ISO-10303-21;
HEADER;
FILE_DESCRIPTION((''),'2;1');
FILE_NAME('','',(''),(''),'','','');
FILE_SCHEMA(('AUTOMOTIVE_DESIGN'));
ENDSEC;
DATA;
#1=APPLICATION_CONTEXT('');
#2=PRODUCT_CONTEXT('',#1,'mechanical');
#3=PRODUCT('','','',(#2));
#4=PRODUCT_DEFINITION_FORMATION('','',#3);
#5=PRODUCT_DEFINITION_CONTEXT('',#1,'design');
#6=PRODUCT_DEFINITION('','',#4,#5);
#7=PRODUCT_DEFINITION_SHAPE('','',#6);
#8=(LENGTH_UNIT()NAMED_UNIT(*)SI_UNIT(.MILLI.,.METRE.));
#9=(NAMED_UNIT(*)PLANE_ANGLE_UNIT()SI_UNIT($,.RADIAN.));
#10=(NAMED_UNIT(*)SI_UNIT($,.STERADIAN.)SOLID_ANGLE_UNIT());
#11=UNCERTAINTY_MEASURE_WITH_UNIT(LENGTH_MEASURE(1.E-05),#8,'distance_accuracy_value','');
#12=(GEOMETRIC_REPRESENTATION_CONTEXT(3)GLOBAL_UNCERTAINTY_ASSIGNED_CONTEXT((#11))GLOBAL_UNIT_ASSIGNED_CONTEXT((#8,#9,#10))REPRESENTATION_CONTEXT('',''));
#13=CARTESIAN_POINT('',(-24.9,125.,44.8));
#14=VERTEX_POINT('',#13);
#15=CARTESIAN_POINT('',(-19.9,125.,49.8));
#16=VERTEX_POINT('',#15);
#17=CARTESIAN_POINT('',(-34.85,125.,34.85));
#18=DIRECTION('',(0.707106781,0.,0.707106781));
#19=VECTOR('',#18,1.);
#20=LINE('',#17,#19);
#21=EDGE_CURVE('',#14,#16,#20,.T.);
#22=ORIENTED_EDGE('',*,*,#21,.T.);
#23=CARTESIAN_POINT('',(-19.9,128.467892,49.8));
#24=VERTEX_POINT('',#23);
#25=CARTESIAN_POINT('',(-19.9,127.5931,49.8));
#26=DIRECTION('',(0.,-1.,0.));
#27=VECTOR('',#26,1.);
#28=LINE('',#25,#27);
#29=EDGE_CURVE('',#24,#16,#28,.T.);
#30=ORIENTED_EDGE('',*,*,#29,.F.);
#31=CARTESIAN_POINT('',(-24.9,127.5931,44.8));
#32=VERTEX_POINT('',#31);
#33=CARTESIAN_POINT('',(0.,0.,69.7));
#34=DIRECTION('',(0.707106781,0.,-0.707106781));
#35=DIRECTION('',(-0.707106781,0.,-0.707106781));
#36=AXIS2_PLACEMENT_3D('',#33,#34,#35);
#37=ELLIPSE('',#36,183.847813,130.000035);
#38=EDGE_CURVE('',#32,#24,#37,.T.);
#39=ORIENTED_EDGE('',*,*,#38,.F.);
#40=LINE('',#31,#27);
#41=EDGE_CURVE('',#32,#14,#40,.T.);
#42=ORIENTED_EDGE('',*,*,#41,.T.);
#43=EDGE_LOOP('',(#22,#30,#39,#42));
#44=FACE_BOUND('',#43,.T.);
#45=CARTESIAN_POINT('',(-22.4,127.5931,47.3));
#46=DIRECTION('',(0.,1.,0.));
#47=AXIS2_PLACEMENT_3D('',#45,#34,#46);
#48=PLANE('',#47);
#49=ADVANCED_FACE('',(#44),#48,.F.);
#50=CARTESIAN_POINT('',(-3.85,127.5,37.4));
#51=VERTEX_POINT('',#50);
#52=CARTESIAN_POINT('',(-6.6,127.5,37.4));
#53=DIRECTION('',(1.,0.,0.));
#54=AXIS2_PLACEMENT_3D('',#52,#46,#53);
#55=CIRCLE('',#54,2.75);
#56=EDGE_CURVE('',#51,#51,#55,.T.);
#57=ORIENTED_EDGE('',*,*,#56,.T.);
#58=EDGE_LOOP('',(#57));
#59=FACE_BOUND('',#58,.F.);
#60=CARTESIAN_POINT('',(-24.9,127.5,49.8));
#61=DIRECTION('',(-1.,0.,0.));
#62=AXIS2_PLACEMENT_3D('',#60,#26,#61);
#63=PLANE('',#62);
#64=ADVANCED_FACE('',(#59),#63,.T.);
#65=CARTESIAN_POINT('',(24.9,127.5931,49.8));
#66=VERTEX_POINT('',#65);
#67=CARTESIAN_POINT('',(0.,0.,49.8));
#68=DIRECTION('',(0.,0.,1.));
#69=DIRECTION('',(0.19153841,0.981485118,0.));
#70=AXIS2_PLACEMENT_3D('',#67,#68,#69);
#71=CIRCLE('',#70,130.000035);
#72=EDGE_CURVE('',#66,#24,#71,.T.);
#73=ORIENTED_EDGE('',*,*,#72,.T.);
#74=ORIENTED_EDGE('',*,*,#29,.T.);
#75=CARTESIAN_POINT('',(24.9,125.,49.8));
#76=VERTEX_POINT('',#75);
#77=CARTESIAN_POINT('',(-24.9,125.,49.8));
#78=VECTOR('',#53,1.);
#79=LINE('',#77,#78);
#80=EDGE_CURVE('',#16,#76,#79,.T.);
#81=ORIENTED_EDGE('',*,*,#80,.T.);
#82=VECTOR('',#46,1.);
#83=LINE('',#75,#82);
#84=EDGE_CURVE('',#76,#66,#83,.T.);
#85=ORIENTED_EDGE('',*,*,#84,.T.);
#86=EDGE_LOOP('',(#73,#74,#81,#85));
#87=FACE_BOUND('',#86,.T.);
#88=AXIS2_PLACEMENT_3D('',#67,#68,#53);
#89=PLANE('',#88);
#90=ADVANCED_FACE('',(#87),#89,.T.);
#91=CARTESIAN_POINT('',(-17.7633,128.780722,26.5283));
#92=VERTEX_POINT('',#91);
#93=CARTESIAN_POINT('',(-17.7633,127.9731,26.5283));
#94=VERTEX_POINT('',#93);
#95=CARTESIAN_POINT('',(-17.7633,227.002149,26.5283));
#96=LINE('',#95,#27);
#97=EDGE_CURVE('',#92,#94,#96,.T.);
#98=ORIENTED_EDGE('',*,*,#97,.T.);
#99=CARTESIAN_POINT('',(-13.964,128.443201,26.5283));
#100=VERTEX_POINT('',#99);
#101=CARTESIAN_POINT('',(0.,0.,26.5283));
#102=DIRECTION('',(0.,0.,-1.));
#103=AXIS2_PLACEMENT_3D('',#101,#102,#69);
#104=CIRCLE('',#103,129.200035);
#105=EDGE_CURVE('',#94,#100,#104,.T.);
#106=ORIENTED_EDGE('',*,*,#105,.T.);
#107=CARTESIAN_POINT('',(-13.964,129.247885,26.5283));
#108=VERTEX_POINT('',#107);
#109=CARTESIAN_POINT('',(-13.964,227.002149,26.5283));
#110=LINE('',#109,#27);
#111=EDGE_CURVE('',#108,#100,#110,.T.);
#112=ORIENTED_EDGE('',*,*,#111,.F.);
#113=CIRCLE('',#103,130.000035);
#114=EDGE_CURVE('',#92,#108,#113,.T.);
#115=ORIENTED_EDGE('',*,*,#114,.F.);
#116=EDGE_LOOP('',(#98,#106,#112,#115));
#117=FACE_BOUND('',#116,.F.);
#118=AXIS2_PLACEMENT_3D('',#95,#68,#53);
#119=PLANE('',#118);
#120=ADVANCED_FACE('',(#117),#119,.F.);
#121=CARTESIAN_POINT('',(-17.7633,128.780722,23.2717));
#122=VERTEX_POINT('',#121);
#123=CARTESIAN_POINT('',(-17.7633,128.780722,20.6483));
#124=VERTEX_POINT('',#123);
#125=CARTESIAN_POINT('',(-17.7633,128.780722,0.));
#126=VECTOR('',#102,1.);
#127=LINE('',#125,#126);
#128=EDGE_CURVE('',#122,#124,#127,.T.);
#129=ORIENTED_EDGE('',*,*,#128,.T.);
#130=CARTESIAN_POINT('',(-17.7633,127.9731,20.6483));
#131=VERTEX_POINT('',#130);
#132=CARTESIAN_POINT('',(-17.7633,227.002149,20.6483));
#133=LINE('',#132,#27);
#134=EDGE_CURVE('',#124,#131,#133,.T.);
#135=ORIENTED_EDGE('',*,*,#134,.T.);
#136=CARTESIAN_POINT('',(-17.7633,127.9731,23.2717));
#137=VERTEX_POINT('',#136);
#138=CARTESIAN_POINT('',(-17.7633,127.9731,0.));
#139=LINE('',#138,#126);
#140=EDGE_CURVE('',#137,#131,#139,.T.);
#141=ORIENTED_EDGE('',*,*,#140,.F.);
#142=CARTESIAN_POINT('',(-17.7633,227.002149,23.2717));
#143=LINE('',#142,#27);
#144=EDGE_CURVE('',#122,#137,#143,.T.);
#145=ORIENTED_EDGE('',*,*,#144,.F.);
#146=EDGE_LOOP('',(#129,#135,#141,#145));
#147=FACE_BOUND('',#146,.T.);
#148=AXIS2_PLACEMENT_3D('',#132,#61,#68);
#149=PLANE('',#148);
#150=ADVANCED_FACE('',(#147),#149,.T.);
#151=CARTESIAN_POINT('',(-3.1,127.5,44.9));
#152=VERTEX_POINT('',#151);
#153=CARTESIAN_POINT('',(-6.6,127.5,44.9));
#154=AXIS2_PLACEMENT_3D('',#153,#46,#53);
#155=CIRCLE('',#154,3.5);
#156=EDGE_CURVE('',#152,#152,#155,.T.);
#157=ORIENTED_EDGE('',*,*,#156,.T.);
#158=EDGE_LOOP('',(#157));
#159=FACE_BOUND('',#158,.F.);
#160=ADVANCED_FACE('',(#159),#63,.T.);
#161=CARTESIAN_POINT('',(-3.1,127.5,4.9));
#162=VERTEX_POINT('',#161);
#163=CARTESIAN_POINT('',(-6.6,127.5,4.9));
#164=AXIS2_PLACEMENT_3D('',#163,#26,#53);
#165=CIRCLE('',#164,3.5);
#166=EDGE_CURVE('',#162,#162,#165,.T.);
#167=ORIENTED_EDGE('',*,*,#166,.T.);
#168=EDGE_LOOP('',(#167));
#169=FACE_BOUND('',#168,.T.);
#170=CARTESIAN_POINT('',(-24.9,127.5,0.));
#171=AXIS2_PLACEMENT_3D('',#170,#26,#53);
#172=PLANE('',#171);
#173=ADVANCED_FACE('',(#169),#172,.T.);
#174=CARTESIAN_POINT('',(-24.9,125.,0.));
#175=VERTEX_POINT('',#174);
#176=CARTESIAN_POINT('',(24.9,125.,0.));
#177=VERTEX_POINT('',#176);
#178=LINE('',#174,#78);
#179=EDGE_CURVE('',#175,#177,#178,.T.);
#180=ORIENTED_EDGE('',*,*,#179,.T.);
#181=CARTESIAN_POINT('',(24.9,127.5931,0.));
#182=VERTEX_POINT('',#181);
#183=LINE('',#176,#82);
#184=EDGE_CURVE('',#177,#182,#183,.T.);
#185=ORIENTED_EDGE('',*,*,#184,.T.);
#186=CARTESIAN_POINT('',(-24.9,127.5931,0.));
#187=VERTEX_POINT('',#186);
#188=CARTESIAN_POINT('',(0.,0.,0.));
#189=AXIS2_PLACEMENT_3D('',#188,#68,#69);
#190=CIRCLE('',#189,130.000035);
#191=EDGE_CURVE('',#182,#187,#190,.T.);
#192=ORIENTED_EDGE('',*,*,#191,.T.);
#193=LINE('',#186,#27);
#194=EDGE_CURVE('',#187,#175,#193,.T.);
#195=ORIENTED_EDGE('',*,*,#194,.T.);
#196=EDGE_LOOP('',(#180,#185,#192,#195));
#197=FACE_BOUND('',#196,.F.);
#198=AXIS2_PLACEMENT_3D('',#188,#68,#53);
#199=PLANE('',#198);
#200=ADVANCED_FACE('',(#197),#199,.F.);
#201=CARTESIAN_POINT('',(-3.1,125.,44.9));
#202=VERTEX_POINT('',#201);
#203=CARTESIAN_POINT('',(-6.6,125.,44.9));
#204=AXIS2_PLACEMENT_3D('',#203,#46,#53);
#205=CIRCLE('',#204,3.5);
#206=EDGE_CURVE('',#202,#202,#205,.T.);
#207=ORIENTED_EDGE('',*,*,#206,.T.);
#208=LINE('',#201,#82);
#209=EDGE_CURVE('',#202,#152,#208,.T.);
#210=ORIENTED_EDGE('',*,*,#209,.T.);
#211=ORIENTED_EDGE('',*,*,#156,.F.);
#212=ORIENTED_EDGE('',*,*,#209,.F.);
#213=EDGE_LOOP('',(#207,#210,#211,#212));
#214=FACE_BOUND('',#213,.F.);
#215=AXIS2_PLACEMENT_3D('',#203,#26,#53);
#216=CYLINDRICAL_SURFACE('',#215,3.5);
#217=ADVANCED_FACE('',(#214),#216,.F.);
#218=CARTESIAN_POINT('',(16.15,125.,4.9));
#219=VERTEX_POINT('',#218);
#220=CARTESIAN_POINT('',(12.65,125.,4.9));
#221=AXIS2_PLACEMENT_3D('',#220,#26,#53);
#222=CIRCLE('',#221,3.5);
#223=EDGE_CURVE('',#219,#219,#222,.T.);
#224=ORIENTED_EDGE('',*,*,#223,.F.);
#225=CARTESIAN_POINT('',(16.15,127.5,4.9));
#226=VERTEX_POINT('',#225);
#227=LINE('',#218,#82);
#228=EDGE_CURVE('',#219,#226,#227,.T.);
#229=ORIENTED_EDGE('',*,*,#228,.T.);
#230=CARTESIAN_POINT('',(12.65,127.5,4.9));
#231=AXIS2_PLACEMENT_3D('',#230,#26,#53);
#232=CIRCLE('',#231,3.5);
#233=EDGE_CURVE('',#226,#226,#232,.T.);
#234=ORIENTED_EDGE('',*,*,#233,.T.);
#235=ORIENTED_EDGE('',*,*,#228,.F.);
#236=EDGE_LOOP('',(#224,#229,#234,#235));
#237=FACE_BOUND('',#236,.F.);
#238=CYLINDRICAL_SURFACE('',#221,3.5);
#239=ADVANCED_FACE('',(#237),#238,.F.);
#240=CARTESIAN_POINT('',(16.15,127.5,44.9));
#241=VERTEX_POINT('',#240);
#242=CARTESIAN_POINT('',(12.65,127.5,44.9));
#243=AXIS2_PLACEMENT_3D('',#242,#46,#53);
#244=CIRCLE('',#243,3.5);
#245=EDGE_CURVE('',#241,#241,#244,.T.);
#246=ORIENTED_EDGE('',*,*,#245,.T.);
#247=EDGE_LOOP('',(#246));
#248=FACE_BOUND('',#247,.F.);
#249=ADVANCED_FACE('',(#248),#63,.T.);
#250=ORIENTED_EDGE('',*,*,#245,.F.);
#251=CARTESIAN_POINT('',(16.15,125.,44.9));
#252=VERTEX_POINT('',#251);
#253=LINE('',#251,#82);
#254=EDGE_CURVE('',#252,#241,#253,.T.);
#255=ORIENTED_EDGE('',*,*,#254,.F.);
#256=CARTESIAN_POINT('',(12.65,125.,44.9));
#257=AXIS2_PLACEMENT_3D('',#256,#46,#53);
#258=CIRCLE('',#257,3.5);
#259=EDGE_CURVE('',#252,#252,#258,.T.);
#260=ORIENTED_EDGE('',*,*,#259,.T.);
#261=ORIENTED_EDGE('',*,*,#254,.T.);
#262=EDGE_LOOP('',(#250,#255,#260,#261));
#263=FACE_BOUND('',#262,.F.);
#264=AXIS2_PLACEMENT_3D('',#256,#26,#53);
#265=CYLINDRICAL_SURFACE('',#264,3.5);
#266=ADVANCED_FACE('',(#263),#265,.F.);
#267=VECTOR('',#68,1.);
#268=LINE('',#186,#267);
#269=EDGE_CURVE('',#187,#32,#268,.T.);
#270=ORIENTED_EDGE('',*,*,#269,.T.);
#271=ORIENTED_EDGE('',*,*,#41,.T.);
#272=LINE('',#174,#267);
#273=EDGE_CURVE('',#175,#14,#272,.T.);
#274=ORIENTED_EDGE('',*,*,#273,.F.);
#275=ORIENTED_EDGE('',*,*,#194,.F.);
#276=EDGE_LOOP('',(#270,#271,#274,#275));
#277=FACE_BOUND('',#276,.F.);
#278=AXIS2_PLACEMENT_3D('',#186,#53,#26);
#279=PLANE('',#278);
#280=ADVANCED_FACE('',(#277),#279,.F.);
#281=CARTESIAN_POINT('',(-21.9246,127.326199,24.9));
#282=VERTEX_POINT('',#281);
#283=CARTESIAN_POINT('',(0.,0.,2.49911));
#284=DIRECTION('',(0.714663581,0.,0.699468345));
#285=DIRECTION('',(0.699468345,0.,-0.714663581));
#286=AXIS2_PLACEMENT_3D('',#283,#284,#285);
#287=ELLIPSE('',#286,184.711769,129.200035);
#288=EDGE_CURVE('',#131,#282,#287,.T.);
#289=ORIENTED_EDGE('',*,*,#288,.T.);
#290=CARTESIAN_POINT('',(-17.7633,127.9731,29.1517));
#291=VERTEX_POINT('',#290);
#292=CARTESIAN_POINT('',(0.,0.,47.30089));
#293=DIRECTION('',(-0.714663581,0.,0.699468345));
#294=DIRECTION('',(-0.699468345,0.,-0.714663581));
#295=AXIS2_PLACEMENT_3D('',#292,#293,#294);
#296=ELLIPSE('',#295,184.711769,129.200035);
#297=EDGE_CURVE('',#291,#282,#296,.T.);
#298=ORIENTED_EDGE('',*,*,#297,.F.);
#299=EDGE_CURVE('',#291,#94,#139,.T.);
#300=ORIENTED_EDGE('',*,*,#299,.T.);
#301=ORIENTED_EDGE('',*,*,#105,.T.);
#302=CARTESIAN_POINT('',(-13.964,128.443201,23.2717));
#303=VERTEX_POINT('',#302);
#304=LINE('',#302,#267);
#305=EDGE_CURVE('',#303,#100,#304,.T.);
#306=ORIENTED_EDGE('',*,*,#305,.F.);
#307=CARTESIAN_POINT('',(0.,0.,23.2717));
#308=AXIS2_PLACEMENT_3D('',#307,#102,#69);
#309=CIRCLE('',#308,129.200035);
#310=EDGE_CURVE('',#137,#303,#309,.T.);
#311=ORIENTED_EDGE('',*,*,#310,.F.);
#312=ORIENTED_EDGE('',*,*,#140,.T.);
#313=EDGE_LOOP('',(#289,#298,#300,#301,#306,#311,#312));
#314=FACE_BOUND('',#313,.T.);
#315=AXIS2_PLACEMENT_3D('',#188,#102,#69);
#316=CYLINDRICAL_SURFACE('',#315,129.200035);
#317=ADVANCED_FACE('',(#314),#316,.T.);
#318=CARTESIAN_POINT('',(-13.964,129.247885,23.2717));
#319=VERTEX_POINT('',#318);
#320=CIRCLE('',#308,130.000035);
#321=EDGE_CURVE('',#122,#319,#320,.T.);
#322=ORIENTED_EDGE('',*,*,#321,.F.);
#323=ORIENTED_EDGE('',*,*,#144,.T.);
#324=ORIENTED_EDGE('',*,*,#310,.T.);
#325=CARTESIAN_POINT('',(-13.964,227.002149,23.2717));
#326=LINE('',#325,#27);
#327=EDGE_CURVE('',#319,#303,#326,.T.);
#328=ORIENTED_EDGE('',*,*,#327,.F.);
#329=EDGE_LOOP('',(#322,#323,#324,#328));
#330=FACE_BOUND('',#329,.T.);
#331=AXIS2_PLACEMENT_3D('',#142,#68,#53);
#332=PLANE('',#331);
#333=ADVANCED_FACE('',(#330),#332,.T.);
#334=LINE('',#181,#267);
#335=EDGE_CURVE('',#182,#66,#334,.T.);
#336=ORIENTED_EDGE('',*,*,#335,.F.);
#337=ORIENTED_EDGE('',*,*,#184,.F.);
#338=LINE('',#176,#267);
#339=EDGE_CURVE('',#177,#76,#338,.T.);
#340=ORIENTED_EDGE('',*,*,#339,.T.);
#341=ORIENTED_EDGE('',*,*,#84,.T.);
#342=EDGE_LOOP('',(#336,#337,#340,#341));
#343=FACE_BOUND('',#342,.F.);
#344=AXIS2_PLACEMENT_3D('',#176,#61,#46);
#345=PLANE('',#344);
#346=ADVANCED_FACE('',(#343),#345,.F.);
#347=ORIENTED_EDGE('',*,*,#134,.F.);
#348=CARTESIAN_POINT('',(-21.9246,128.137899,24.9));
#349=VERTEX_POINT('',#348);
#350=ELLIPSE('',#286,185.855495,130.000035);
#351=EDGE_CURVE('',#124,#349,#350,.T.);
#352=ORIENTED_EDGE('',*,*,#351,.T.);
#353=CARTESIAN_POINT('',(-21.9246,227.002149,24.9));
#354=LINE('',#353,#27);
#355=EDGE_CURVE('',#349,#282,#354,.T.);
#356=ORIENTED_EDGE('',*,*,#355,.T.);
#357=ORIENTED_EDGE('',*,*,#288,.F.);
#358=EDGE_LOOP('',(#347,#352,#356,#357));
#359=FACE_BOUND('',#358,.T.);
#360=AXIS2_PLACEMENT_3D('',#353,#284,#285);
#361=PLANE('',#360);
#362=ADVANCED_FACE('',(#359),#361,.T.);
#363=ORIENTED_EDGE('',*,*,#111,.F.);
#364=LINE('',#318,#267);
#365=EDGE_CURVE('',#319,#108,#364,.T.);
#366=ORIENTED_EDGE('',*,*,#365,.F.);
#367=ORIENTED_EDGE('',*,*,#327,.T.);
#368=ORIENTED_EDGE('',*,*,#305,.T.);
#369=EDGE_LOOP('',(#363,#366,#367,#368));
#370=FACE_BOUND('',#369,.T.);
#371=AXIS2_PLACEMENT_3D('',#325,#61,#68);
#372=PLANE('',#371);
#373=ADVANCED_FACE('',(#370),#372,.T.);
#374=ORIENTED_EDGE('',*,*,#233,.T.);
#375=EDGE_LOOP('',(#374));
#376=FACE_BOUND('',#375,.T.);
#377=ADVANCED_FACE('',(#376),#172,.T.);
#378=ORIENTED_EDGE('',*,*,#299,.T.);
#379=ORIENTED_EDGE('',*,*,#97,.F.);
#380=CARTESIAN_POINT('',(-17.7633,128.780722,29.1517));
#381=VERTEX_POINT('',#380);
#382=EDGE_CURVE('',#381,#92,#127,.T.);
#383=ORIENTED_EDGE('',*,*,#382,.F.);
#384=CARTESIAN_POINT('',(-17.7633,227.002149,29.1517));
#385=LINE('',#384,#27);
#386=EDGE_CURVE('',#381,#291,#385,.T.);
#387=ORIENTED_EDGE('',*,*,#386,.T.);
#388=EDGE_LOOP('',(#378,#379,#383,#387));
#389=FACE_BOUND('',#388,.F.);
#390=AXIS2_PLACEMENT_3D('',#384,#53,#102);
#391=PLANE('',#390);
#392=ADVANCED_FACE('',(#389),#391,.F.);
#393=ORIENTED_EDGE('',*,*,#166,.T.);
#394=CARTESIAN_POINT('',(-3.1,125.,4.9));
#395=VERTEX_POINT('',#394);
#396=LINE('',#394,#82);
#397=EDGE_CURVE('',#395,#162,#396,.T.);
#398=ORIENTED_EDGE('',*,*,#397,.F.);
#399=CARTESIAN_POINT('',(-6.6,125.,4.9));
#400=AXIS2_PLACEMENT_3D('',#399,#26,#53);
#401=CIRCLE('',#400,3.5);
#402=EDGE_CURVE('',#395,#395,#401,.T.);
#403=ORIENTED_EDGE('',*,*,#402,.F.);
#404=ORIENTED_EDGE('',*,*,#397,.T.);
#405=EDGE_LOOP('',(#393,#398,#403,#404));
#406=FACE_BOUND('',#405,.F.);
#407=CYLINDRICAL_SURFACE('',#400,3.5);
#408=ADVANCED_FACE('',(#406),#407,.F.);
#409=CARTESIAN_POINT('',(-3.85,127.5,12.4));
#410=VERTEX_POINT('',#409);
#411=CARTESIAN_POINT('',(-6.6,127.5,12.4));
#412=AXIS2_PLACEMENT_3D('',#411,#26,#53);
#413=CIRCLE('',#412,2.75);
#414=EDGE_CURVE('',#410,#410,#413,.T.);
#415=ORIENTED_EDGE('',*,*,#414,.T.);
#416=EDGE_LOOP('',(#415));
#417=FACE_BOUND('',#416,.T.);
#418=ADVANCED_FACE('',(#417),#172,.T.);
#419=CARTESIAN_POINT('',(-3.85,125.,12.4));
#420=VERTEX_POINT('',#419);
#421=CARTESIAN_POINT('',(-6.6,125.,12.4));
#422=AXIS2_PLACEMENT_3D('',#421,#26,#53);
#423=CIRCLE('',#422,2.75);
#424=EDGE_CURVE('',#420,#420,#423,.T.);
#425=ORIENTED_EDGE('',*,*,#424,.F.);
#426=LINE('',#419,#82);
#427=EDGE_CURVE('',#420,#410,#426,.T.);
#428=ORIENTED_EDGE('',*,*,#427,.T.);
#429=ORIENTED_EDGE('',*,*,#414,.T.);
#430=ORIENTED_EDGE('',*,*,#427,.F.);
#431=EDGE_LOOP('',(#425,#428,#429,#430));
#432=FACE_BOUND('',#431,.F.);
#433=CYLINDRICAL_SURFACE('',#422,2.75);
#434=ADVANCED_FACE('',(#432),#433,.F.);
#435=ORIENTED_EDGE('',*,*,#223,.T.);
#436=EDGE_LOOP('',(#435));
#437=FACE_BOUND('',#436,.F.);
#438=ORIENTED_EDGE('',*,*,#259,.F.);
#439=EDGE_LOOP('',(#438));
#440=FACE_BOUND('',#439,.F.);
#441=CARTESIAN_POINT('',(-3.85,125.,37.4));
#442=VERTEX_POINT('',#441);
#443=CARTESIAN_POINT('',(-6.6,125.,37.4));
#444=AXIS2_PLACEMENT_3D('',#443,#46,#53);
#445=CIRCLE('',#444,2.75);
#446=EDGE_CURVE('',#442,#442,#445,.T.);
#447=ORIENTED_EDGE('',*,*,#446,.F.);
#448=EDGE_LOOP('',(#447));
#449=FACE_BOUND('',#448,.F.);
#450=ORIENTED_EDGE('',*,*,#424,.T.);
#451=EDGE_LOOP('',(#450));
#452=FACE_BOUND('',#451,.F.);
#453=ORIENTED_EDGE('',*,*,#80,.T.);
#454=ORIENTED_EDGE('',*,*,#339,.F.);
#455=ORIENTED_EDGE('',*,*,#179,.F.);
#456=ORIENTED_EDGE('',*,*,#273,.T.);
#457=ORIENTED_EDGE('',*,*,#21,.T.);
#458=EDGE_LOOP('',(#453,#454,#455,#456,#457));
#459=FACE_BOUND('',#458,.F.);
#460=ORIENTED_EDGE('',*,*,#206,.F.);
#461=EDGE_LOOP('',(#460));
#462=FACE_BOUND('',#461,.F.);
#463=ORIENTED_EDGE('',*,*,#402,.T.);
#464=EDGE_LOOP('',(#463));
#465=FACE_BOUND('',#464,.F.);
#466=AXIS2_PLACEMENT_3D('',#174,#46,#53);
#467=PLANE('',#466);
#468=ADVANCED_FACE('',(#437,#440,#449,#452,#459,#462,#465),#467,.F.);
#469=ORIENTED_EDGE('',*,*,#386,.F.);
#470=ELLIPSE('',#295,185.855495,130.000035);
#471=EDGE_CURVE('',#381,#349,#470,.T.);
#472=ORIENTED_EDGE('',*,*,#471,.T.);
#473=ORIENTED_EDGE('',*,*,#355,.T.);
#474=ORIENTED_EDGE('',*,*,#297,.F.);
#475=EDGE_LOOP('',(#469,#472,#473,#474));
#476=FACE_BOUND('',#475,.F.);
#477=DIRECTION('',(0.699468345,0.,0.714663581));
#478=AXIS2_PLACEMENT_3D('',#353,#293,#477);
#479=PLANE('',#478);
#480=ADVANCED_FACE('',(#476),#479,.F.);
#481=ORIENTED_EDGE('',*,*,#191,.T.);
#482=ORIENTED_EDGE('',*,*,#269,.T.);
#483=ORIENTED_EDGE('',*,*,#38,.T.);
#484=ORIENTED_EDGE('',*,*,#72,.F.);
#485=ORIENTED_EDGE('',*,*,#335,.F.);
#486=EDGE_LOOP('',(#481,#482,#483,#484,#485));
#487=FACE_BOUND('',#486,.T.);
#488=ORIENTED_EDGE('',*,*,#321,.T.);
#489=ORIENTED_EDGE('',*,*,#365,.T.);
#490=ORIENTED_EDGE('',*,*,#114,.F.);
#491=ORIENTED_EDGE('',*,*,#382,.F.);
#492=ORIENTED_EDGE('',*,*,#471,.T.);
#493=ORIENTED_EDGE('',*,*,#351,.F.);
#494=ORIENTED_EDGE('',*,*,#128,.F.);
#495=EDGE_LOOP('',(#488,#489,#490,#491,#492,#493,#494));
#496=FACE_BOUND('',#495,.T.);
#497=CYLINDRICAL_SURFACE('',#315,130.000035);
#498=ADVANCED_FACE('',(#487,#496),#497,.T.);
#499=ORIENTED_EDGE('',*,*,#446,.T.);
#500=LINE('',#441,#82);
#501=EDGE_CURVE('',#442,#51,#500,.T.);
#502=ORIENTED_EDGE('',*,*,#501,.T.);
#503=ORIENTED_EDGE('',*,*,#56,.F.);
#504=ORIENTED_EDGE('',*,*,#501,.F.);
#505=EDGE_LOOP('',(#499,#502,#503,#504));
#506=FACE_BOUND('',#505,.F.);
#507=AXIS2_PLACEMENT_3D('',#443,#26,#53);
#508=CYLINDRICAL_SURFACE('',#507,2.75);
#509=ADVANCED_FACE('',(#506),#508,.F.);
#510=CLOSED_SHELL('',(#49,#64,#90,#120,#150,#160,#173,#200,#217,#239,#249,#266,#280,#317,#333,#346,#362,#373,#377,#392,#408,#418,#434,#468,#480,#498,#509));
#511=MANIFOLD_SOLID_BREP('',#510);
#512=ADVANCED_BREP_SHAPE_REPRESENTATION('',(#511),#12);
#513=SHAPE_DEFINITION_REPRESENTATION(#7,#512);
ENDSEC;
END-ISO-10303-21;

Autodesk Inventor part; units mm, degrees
ref_plane "YZ Plane" through (0, 0, 0) normal (1, 0, 0) x (0, 1, 0)
sketch "Sketch1" plane through (0, 0, 0) normal (0, 0, 1) x (1, 0, 0)
  line L0 (-24.9, 127.5931) -> (-24.9, 125)
  line L1 (-24.9, 125) -> (24.9, 125)
  line L2 (24.9, 125) -> (24.9, 127.5931)
  arc A0 (24.9, 127.5931) -> (-24.9, 127.5931) centre (0, 0) ccw
  point P0 (0, 130)
  dimension "d0" = 130
  dimension "d1" = 5
  dimension "d2" = 49.8
extrude "Extrusion1" add sketch "Sketch1" along normal blind 49.8
chamfer "Chamfer1" distance 5 angle 45 1 edges at (-24.9, 126.2965, 49.8)
ref_plane "Work Plane1" through (0, 130, 0) normal (0, 1, 0) x (-1, 0, 0)
sketch "Sketch2" plane through (0, 130, 0) normal (0, 1, 0) x (-1, 0, 0)
  line L0 (19.9, 49.8) -> (-24.9, 49.8) construction
  line L1 (-24.9, 0) -> (-24.9, 49.8) construction
  line L2 (-24.9, 24.9) -> (31.0612, 24.9) construction
  line L3 (21.9246, 24.9) -> (17.7633, 29.1517)
  line L4 (17.7633, 29.1517) -> (17.7633, 26.5283)
  line L5 (17.7633, 26.5283) -> (13.964, 26.5283)
  line L6 (13.964, 26.5283) -> (13.964, 24.9)
  line L7 (21.9246, 24.9) -> (17.7633, 20.6483)
  line L8 (17.7633, 20.6483) -> (17.7633, 23.2717)
  line L9 (17.7633, 23.2717) -> (13.964, 23.2717)
  line L10 (13.964, 23.2717) -> (13.964, 24.9)
  point P0 (0, 0)
emboss "Emboss1" sketch "Sketch2" operation cut depth 0.8 direction (0, -1, 0)
sketch "Sketch3" plane through (-24.9, 125, 0) normal (0, -1, 0) x (1, 0, 0)
  line L0 (0, 0) -> (49.8, 0) projected
  line L1 (49.8, 0) -> (49.8, 49.8) construction
  line L2 (49.8, 24.9) -> (6.096, 24.9) construction
  circle A0 centre (18.3, 4.9) radius 3.5
  circle A1 centre (37.55, 4.9) radius 3.5
  circle A2 centre (18.3, 12.4) radius 2.75
  point P0 (24.9, 0)
  dimension "d20" = 7
  dimension "d21" = 7
  dimension "d22" = 20
  dimension "d23" = 20
  dimension "d24" = 12.25
  dimension "d25" = 19.25
  dimension "d26" = 5.5
  dimension "d27" = 12.5
extrude "Extrusion2" cut sketch "Sketch3" against normal blind 2.5
ref_plane "Work Plane2" through (0, 0, 24.9) normal (0, 0, -1) x (-1, 0, 0)
mirror "Mirror1" about plane through (0, 0, 24.9) normal (0, 0, -1) of "Extrusion2"
properties part number "power_signal_socket_cap"
